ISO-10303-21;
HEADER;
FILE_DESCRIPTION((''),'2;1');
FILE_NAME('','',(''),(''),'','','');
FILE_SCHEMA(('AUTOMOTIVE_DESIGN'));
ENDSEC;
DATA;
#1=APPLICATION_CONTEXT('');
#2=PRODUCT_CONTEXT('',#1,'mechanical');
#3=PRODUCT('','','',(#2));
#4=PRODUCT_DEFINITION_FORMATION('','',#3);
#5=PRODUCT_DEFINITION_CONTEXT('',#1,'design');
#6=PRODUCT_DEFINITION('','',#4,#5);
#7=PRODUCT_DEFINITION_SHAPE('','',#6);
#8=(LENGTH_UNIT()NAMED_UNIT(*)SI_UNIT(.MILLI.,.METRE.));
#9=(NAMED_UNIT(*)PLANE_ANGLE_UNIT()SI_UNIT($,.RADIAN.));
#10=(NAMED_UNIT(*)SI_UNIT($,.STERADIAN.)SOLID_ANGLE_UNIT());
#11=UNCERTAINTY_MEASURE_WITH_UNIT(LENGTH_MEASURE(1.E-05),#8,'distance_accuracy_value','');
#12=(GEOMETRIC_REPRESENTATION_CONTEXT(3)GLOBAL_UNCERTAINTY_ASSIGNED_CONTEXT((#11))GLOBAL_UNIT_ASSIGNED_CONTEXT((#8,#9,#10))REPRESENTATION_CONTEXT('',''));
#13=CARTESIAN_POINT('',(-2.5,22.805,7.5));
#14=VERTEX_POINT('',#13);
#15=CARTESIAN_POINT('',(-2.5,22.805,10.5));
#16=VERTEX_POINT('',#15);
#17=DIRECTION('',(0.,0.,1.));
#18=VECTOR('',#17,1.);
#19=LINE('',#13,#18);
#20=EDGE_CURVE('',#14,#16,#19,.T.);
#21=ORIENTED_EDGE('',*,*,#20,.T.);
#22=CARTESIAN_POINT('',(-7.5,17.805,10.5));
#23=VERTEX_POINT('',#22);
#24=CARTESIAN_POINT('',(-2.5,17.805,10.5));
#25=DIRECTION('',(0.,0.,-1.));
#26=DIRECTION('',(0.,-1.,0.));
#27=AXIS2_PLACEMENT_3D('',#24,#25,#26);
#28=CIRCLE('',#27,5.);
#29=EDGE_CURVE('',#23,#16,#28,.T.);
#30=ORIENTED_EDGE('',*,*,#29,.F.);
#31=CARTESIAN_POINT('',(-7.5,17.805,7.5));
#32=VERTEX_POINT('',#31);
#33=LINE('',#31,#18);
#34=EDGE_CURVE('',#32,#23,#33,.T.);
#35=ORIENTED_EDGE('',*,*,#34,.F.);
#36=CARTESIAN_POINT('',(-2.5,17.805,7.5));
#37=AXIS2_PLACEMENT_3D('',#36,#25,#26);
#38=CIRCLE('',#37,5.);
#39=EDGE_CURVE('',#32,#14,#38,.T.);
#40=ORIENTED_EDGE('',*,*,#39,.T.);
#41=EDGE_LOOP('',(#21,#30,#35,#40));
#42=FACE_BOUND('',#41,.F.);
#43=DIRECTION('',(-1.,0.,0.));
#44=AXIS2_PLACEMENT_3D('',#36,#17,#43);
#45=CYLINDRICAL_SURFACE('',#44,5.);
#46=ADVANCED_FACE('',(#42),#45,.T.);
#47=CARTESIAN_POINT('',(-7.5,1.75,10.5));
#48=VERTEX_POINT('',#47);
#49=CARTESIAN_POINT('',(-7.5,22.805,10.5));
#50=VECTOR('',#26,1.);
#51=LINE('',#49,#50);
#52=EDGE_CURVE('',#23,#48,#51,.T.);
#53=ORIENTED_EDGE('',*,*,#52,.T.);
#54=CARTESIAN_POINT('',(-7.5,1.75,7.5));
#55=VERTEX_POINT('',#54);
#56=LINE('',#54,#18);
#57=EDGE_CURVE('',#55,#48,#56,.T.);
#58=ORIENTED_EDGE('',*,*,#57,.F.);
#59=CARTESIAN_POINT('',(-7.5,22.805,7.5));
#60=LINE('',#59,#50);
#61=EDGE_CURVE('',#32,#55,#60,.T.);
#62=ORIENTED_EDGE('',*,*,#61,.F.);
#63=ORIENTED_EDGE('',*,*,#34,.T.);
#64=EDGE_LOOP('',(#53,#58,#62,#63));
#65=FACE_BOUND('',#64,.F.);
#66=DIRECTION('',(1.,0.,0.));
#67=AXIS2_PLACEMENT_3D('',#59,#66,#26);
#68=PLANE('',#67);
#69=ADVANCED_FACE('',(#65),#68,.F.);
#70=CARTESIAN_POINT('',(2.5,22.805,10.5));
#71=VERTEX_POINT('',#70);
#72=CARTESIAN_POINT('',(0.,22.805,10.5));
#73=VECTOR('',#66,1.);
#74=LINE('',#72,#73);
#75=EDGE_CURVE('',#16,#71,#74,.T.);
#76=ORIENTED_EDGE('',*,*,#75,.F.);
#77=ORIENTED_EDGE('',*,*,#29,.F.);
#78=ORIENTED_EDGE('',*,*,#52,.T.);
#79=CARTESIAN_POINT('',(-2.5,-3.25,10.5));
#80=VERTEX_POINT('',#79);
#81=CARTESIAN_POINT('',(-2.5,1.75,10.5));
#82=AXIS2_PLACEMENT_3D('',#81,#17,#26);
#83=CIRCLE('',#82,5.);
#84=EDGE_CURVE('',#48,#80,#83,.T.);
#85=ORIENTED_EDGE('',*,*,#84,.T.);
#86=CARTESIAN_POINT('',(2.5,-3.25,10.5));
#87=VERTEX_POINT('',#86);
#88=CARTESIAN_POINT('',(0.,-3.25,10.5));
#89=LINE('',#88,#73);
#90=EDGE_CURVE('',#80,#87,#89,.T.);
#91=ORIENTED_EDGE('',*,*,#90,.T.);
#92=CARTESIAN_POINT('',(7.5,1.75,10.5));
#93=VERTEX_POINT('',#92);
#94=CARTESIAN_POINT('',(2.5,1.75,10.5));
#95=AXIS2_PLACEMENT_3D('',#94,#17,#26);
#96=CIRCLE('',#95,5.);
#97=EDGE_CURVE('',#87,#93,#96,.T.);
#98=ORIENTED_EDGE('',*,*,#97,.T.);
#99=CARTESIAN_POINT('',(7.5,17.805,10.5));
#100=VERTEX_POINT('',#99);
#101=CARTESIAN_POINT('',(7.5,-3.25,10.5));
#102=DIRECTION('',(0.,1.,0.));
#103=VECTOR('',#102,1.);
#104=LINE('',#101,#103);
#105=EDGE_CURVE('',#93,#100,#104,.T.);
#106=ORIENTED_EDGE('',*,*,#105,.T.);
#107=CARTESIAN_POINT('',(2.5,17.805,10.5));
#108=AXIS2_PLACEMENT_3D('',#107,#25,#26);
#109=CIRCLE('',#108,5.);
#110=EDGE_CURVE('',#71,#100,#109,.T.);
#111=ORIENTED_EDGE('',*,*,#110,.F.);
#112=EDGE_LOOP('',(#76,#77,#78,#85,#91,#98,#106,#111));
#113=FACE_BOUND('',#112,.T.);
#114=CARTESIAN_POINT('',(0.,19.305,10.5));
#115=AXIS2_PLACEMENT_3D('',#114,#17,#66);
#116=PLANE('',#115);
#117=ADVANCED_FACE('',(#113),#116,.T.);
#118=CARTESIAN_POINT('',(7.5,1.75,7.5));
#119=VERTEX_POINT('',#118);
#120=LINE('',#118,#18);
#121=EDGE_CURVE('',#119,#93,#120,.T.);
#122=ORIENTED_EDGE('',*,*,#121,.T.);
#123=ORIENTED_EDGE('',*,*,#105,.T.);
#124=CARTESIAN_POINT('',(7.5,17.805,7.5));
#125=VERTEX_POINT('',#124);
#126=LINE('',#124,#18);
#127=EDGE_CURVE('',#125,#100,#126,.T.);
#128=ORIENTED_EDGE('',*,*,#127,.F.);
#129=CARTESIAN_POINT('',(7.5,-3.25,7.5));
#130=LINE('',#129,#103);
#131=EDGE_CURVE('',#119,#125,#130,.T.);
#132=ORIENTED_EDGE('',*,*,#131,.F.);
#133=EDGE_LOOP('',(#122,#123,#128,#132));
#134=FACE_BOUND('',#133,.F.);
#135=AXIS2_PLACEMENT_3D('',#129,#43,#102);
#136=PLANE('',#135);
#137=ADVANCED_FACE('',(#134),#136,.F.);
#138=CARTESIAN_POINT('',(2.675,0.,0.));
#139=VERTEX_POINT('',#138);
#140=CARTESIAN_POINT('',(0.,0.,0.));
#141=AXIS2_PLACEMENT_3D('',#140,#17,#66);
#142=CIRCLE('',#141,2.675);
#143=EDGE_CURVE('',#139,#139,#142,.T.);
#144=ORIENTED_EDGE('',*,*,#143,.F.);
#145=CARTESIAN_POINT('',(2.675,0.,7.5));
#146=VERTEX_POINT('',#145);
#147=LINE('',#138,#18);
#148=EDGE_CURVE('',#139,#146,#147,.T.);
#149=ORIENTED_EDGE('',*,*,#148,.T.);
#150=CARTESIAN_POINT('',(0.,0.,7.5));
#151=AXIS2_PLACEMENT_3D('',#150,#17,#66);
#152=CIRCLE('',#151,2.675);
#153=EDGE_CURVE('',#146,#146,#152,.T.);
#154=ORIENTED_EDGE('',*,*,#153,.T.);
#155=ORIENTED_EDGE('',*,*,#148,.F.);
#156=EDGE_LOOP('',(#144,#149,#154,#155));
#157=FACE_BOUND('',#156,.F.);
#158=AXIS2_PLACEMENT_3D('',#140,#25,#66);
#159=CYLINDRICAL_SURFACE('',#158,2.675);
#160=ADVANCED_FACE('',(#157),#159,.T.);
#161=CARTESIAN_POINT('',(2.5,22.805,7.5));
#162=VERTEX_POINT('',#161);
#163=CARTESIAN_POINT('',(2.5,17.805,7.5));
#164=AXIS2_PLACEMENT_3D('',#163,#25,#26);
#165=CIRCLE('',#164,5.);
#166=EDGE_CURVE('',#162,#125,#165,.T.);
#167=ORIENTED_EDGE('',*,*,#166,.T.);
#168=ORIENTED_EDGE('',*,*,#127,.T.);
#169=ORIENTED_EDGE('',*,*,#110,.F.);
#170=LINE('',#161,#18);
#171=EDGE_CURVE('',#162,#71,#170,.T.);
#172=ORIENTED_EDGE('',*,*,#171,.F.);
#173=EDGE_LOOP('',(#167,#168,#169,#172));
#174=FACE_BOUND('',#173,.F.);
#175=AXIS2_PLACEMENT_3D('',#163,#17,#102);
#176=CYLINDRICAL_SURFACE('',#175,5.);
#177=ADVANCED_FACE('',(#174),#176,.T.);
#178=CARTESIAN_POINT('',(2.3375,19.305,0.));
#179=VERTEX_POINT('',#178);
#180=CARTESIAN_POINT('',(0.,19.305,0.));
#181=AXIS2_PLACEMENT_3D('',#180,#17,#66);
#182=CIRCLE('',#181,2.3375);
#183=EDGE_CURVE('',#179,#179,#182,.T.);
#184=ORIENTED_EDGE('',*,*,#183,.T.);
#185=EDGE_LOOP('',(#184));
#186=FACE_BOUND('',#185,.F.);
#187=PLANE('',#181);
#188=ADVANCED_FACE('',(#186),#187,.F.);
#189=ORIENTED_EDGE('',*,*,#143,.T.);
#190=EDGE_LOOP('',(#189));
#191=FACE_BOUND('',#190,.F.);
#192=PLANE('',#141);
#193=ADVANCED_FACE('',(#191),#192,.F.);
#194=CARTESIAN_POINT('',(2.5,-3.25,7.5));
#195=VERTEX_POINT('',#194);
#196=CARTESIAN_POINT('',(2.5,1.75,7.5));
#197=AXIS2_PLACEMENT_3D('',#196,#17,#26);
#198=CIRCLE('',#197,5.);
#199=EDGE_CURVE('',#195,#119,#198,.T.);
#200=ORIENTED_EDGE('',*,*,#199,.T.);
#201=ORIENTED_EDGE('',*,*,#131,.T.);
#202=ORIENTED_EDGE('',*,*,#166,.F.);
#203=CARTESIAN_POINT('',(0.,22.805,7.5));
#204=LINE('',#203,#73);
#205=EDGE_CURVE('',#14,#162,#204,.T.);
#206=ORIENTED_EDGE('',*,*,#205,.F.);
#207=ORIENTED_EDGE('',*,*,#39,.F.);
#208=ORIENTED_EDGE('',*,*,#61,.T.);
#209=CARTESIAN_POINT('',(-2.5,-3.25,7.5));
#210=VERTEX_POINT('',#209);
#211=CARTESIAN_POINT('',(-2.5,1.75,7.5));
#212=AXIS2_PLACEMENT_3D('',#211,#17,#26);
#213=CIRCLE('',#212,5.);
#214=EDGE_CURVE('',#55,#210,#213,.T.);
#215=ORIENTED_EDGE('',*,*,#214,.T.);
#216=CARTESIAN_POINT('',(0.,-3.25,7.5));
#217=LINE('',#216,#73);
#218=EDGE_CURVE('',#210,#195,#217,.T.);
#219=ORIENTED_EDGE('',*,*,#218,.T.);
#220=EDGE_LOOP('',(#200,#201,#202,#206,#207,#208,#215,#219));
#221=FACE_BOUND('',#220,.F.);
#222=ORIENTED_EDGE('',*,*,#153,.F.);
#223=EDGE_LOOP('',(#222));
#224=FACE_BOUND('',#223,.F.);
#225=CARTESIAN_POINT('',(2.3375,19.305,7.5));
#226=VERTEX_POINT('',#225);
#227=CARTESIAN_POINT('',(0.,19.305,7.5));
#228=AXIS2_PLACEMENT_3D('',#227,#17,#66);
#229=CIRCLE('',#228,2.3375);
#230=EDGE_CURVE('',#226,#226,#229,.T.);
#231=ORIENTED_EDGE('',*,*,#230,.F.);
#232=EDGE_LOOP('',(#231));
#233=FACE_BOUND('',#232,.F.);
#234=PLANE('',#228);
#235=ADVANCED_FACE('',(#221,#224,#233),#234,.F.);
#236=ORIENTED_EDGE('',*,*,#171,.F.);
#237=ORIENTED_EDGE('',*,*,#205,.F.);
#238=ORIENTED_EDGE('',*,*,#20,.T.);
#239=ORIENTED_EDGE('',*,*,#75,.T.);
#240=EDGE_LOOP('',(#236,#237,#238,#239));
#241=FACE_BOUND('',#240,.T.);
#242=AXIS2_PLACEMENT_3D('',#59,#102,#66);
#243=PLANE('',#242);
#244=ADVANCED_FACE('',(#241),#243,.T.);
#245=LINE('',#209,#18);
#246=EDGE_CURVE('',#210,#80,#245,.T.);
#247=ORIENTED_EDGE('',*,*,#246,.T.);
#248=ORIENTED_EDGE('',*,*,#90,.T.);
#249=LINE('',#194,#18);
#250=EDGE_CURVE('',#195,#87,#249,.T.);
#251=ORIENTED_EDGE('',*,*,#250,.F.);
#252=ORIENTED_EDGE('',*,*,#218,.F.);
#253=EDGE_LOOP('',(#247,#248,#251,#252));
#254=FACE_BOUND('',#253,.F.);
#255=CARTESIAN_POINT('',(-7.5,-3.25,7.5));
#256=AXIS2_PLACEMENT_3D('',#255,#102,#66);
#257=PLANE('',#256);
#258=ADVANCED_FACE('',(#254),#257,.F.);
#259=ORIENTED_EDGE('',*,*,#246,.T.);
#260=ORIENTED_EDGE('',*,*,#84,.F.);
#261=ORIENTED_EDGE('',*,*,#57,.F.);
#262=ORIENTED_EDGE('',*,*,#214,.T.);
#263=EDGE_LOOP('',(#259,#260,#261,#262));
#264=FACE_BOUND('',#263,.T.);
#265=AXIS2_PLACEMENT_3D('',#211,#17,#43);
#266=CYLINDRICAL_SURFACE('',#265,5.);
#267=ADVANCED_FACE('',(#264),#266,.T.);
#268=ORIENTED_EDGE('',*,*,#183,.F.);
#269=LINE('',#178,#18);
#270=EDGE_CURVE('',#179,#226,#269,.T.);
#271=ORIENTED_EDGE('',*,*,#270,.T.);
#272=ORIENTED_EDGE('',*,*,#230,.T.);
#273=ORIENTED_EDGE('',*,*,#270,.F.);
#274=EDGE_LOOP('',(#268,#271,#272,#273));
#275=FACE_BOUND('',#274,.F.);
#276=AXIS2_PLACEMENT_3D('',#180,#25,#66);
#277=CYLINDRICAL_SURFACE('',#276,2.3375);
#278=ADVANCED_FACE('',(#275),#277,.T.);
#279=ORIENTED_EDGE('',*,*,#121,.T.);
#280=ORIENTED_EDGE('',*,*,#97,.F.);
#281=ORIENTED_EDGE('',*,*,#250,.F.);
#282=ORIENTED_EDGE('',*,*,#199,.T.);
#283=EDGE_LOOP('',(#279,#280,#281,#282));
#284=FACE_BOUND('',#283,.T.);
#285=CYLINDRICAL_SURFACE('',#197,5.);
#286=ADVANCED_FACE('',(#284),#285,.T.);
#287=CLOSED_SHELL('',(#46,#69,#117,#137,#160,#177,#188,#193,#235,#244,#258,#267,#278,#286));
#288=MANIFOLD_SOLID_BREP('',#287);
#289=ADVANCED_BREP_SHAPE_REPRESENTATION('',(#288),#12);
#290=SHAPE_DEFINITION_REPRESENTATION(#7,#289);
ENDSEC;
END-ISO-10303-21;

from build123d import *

# Parameters (mm, degrees)
F0_R     = 2.675
F1_DEPTH = 7.5
F0_R_2   = 2.3375
F2_W     = 15
F2_H     = 7
F2_R     = 2.3375
F2_H_2   = 12.555
F2_H_3   = 6.5
F3_DEPTH = 3
F4_R     = 5


# Not quite as in the source:
# - a feature names something its author has since deleted; it is built from what else it names


with BuildPart() as f1:
    # F0 (on Top) → F1 (new body)
    with BuildSketch(Plane.XY):
        Circle(F0_R)
    extrude(amount=F1_DEPTH)



with BuildPart() as f1b:
    # F0 (on Top) → F1, piece 2 (new body)
    with BuildSketch(Plane.XY):
        with Locations((0, 19.305)):
            Circle(F0_R_2)
    extrude(amount=F1_DEPTH)


with BuildPart() as f1_1:
    add(f1.part)

    add(f1b.part)  # F3 merges F1b
    # F2 (on face) → F3 (join)
    with BuildSketch(Plane.XY.offset(7.5)):
        with Locations((0, 19.305)):
            Rectangle(F2_W, F2_H)
        with Locations((0, 19.305)):
            Circle(F2_R, mode=Mode.SUBTRACT)
        with Locations((0, 19.305)):
            Circle(F2_R)
        with Locations((0, 9.5275)):
            Rectangle(F2_W, F2_H_2)
        Rectangle(F2_W, F2_H_3)
    extrude(amount=F3_DEPTH)

    # F4
    f4_edges = [f1_1.edges().sort_by_distance(p)[0] for p in [
        (-7.5, -3.25, 9),
        (7.5, -3.25, 9),
        (7.5, 22.805, 9),
        (-7.5, 22.805, 9),
    ]]
    fillet(f4_edges, radius=F4_R)


solid = f1_1.part
